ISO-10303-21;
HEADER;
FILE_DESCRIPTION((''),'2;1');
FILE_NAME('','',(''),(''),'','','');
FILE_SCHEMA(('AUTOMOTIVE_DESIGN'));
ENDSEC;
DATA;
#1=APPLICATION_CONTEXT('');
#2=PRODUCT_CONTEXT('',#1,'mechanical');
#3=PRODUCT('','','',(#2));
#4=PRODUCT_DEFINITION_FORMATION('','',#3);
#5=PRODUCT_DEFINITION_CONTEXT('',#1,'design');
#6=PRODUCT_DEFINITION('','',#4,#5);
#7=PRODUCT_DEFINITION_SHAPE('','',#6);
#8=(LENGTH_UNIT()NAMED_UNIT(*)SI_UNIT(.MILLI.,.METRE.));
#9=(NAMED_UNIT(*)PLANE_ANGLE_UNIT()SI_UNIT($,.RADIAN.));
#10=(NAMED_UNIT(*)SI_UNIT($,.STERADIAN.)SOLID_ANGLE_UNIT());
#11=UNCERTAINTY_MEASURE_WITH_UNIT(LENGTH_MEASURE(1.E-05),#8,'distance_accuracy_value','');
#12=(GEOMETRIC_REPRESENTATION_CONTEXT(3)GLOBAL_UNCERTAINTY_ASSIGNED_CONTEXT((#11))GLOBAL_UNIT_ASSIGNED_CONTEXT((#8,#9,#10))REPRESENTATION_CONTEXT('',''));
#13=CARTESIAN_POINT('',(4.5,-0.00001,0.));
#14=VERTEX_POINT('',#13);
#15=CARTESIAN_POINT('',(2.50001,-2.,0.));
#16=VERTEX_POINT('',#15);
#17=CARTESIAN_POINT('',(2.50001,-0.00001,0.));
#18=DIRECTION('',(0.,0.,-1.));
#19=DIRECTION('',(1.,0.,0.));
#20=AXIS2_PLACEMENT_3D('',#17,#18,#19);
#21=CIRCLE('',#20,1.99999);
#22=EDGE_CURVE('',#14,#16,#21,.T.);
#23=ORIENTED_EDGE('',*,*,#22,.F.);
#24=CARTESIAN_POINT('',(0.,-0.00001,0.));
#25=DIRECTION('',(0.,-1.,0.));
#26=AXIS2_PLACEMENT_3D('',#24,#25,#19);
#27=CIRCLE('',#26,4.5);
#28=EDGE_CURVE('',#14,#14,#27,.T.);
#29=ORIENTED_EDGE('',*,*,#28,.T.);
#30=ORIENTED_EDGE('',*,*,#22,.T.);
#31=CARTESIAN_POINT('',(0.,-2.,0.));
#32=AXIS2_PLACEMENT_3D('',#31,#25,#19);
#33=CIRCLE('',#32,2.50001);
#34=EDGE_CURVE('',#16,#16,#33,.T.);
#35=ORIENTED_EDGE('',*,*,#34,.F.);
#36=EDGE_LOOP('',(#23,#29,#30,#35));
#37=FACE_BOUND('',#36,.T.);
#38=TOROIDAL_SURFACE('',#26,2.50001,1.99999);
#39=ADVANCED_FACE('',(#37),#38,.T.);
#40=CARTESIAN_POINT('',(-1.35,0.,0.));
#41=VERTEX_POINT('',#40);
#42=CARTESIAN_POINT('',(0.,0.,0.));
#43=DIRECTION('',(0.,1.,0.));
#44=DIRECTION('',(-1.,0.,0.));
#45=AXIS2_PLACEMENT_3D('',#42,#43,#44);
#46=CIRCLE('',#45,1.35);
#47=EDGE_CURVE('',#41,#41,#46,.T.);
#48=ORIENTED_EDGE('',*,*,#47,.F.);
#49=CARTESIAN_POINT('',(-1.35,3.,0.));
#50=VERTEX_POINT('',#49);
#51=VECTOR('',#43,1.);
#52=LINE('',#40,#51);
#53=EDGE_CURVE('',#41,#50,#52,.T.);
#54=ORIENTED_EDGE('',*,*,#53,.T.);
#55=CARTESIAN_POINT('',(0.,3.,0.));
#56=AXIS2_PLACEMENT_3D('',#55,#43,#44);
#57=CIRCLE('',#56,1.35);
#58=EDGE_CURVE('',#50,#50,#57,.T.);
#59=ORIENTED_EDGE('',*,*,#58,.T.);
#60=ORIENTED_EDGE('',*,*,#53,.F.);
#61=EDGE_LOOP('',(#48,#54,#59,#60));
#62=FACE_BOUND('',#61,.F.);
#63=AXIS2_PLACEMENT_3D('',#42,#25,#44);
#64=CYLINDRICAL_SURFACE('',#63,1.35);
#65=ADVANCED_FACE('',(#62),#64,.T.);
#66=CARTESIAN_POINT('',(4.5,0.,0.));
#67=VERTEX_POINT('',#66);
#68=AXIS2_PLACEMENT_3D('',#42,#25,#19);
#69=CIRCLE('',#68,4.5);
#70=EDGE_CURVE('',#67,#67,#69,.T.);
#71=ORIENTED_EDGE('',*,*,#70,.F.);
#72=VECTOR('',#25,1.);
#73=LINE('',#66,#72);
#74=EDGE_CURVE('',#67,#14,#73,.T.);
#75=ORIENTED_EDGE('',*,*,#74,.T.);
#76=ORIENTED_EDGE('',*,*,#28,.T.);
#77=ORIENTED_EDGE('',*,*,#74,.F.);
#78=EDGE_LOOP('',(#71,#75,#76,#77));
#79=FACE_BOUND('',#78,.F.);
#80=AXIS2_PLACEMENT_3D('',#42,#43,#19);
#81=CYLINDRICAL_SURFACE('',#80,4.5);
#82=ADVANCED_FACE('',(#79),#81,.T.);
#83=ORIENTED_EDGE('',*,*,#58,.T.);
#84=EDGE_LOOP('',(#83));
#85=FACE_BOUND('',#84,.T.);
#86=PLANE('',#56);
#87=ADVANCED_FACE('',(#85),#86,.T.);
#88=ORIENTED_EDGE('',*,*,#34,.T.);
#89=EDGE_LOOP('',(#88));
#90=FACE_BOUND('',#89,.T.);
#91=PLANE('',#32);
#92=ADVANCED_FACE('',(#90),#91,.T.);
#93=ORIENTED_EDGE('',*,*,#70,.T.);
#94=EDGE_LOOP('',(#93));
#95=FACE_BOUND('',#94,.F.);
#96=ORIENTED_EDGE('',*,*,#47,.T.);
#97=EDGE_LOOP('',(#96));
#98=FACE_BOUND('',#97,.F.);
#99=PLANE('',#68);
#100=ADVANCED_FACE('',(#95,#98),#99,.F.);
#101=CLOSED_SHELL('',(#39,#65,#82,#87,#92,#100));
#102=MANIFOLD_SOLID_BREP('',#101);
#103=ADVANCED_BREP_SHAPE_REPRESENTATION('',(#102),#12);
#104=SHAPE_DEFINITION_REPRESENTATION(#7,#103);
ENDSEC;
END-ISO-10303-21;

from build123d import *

# Parameters (mm, degrees)
F0_R     = 4.5
F1_DEPTH = 2
F2_R     = 1.99999
F3_R     = 1.35
F4_DEPTH = 3


# Not quite as in the source:
# - a fillet or chamfer is up to 0.001 mm smaller than in the source, because OpenCascade refuses the exact size


with BuildPart() as f1:
    # F0 (on Front) → F1 (new body)
    with BuildSketch(Plane.XZ):
        Circle(F0_R)
    extrude(amount=F1_DEPTH)

    # F2 (radius 2 in the source; OpenCascade refuses exactly that, so slightly less here)
    f2_edges = [f1.edges().sort_by_distance(p)[0] for p in [
        (-4.5, -2, 0),
    ]]
    fillet(f2_edges, radius=F2_R)

    # F3 (on face) → F4 (join)
    with BuildSketch(Plane(origin=(0, 0, 0), x_dir=(-1, 0, 0), z_dir=(0, 1, 0))):
        Circle(F3_R)
    extrude(amount=F4_DEPTH)


solid = f1.part
